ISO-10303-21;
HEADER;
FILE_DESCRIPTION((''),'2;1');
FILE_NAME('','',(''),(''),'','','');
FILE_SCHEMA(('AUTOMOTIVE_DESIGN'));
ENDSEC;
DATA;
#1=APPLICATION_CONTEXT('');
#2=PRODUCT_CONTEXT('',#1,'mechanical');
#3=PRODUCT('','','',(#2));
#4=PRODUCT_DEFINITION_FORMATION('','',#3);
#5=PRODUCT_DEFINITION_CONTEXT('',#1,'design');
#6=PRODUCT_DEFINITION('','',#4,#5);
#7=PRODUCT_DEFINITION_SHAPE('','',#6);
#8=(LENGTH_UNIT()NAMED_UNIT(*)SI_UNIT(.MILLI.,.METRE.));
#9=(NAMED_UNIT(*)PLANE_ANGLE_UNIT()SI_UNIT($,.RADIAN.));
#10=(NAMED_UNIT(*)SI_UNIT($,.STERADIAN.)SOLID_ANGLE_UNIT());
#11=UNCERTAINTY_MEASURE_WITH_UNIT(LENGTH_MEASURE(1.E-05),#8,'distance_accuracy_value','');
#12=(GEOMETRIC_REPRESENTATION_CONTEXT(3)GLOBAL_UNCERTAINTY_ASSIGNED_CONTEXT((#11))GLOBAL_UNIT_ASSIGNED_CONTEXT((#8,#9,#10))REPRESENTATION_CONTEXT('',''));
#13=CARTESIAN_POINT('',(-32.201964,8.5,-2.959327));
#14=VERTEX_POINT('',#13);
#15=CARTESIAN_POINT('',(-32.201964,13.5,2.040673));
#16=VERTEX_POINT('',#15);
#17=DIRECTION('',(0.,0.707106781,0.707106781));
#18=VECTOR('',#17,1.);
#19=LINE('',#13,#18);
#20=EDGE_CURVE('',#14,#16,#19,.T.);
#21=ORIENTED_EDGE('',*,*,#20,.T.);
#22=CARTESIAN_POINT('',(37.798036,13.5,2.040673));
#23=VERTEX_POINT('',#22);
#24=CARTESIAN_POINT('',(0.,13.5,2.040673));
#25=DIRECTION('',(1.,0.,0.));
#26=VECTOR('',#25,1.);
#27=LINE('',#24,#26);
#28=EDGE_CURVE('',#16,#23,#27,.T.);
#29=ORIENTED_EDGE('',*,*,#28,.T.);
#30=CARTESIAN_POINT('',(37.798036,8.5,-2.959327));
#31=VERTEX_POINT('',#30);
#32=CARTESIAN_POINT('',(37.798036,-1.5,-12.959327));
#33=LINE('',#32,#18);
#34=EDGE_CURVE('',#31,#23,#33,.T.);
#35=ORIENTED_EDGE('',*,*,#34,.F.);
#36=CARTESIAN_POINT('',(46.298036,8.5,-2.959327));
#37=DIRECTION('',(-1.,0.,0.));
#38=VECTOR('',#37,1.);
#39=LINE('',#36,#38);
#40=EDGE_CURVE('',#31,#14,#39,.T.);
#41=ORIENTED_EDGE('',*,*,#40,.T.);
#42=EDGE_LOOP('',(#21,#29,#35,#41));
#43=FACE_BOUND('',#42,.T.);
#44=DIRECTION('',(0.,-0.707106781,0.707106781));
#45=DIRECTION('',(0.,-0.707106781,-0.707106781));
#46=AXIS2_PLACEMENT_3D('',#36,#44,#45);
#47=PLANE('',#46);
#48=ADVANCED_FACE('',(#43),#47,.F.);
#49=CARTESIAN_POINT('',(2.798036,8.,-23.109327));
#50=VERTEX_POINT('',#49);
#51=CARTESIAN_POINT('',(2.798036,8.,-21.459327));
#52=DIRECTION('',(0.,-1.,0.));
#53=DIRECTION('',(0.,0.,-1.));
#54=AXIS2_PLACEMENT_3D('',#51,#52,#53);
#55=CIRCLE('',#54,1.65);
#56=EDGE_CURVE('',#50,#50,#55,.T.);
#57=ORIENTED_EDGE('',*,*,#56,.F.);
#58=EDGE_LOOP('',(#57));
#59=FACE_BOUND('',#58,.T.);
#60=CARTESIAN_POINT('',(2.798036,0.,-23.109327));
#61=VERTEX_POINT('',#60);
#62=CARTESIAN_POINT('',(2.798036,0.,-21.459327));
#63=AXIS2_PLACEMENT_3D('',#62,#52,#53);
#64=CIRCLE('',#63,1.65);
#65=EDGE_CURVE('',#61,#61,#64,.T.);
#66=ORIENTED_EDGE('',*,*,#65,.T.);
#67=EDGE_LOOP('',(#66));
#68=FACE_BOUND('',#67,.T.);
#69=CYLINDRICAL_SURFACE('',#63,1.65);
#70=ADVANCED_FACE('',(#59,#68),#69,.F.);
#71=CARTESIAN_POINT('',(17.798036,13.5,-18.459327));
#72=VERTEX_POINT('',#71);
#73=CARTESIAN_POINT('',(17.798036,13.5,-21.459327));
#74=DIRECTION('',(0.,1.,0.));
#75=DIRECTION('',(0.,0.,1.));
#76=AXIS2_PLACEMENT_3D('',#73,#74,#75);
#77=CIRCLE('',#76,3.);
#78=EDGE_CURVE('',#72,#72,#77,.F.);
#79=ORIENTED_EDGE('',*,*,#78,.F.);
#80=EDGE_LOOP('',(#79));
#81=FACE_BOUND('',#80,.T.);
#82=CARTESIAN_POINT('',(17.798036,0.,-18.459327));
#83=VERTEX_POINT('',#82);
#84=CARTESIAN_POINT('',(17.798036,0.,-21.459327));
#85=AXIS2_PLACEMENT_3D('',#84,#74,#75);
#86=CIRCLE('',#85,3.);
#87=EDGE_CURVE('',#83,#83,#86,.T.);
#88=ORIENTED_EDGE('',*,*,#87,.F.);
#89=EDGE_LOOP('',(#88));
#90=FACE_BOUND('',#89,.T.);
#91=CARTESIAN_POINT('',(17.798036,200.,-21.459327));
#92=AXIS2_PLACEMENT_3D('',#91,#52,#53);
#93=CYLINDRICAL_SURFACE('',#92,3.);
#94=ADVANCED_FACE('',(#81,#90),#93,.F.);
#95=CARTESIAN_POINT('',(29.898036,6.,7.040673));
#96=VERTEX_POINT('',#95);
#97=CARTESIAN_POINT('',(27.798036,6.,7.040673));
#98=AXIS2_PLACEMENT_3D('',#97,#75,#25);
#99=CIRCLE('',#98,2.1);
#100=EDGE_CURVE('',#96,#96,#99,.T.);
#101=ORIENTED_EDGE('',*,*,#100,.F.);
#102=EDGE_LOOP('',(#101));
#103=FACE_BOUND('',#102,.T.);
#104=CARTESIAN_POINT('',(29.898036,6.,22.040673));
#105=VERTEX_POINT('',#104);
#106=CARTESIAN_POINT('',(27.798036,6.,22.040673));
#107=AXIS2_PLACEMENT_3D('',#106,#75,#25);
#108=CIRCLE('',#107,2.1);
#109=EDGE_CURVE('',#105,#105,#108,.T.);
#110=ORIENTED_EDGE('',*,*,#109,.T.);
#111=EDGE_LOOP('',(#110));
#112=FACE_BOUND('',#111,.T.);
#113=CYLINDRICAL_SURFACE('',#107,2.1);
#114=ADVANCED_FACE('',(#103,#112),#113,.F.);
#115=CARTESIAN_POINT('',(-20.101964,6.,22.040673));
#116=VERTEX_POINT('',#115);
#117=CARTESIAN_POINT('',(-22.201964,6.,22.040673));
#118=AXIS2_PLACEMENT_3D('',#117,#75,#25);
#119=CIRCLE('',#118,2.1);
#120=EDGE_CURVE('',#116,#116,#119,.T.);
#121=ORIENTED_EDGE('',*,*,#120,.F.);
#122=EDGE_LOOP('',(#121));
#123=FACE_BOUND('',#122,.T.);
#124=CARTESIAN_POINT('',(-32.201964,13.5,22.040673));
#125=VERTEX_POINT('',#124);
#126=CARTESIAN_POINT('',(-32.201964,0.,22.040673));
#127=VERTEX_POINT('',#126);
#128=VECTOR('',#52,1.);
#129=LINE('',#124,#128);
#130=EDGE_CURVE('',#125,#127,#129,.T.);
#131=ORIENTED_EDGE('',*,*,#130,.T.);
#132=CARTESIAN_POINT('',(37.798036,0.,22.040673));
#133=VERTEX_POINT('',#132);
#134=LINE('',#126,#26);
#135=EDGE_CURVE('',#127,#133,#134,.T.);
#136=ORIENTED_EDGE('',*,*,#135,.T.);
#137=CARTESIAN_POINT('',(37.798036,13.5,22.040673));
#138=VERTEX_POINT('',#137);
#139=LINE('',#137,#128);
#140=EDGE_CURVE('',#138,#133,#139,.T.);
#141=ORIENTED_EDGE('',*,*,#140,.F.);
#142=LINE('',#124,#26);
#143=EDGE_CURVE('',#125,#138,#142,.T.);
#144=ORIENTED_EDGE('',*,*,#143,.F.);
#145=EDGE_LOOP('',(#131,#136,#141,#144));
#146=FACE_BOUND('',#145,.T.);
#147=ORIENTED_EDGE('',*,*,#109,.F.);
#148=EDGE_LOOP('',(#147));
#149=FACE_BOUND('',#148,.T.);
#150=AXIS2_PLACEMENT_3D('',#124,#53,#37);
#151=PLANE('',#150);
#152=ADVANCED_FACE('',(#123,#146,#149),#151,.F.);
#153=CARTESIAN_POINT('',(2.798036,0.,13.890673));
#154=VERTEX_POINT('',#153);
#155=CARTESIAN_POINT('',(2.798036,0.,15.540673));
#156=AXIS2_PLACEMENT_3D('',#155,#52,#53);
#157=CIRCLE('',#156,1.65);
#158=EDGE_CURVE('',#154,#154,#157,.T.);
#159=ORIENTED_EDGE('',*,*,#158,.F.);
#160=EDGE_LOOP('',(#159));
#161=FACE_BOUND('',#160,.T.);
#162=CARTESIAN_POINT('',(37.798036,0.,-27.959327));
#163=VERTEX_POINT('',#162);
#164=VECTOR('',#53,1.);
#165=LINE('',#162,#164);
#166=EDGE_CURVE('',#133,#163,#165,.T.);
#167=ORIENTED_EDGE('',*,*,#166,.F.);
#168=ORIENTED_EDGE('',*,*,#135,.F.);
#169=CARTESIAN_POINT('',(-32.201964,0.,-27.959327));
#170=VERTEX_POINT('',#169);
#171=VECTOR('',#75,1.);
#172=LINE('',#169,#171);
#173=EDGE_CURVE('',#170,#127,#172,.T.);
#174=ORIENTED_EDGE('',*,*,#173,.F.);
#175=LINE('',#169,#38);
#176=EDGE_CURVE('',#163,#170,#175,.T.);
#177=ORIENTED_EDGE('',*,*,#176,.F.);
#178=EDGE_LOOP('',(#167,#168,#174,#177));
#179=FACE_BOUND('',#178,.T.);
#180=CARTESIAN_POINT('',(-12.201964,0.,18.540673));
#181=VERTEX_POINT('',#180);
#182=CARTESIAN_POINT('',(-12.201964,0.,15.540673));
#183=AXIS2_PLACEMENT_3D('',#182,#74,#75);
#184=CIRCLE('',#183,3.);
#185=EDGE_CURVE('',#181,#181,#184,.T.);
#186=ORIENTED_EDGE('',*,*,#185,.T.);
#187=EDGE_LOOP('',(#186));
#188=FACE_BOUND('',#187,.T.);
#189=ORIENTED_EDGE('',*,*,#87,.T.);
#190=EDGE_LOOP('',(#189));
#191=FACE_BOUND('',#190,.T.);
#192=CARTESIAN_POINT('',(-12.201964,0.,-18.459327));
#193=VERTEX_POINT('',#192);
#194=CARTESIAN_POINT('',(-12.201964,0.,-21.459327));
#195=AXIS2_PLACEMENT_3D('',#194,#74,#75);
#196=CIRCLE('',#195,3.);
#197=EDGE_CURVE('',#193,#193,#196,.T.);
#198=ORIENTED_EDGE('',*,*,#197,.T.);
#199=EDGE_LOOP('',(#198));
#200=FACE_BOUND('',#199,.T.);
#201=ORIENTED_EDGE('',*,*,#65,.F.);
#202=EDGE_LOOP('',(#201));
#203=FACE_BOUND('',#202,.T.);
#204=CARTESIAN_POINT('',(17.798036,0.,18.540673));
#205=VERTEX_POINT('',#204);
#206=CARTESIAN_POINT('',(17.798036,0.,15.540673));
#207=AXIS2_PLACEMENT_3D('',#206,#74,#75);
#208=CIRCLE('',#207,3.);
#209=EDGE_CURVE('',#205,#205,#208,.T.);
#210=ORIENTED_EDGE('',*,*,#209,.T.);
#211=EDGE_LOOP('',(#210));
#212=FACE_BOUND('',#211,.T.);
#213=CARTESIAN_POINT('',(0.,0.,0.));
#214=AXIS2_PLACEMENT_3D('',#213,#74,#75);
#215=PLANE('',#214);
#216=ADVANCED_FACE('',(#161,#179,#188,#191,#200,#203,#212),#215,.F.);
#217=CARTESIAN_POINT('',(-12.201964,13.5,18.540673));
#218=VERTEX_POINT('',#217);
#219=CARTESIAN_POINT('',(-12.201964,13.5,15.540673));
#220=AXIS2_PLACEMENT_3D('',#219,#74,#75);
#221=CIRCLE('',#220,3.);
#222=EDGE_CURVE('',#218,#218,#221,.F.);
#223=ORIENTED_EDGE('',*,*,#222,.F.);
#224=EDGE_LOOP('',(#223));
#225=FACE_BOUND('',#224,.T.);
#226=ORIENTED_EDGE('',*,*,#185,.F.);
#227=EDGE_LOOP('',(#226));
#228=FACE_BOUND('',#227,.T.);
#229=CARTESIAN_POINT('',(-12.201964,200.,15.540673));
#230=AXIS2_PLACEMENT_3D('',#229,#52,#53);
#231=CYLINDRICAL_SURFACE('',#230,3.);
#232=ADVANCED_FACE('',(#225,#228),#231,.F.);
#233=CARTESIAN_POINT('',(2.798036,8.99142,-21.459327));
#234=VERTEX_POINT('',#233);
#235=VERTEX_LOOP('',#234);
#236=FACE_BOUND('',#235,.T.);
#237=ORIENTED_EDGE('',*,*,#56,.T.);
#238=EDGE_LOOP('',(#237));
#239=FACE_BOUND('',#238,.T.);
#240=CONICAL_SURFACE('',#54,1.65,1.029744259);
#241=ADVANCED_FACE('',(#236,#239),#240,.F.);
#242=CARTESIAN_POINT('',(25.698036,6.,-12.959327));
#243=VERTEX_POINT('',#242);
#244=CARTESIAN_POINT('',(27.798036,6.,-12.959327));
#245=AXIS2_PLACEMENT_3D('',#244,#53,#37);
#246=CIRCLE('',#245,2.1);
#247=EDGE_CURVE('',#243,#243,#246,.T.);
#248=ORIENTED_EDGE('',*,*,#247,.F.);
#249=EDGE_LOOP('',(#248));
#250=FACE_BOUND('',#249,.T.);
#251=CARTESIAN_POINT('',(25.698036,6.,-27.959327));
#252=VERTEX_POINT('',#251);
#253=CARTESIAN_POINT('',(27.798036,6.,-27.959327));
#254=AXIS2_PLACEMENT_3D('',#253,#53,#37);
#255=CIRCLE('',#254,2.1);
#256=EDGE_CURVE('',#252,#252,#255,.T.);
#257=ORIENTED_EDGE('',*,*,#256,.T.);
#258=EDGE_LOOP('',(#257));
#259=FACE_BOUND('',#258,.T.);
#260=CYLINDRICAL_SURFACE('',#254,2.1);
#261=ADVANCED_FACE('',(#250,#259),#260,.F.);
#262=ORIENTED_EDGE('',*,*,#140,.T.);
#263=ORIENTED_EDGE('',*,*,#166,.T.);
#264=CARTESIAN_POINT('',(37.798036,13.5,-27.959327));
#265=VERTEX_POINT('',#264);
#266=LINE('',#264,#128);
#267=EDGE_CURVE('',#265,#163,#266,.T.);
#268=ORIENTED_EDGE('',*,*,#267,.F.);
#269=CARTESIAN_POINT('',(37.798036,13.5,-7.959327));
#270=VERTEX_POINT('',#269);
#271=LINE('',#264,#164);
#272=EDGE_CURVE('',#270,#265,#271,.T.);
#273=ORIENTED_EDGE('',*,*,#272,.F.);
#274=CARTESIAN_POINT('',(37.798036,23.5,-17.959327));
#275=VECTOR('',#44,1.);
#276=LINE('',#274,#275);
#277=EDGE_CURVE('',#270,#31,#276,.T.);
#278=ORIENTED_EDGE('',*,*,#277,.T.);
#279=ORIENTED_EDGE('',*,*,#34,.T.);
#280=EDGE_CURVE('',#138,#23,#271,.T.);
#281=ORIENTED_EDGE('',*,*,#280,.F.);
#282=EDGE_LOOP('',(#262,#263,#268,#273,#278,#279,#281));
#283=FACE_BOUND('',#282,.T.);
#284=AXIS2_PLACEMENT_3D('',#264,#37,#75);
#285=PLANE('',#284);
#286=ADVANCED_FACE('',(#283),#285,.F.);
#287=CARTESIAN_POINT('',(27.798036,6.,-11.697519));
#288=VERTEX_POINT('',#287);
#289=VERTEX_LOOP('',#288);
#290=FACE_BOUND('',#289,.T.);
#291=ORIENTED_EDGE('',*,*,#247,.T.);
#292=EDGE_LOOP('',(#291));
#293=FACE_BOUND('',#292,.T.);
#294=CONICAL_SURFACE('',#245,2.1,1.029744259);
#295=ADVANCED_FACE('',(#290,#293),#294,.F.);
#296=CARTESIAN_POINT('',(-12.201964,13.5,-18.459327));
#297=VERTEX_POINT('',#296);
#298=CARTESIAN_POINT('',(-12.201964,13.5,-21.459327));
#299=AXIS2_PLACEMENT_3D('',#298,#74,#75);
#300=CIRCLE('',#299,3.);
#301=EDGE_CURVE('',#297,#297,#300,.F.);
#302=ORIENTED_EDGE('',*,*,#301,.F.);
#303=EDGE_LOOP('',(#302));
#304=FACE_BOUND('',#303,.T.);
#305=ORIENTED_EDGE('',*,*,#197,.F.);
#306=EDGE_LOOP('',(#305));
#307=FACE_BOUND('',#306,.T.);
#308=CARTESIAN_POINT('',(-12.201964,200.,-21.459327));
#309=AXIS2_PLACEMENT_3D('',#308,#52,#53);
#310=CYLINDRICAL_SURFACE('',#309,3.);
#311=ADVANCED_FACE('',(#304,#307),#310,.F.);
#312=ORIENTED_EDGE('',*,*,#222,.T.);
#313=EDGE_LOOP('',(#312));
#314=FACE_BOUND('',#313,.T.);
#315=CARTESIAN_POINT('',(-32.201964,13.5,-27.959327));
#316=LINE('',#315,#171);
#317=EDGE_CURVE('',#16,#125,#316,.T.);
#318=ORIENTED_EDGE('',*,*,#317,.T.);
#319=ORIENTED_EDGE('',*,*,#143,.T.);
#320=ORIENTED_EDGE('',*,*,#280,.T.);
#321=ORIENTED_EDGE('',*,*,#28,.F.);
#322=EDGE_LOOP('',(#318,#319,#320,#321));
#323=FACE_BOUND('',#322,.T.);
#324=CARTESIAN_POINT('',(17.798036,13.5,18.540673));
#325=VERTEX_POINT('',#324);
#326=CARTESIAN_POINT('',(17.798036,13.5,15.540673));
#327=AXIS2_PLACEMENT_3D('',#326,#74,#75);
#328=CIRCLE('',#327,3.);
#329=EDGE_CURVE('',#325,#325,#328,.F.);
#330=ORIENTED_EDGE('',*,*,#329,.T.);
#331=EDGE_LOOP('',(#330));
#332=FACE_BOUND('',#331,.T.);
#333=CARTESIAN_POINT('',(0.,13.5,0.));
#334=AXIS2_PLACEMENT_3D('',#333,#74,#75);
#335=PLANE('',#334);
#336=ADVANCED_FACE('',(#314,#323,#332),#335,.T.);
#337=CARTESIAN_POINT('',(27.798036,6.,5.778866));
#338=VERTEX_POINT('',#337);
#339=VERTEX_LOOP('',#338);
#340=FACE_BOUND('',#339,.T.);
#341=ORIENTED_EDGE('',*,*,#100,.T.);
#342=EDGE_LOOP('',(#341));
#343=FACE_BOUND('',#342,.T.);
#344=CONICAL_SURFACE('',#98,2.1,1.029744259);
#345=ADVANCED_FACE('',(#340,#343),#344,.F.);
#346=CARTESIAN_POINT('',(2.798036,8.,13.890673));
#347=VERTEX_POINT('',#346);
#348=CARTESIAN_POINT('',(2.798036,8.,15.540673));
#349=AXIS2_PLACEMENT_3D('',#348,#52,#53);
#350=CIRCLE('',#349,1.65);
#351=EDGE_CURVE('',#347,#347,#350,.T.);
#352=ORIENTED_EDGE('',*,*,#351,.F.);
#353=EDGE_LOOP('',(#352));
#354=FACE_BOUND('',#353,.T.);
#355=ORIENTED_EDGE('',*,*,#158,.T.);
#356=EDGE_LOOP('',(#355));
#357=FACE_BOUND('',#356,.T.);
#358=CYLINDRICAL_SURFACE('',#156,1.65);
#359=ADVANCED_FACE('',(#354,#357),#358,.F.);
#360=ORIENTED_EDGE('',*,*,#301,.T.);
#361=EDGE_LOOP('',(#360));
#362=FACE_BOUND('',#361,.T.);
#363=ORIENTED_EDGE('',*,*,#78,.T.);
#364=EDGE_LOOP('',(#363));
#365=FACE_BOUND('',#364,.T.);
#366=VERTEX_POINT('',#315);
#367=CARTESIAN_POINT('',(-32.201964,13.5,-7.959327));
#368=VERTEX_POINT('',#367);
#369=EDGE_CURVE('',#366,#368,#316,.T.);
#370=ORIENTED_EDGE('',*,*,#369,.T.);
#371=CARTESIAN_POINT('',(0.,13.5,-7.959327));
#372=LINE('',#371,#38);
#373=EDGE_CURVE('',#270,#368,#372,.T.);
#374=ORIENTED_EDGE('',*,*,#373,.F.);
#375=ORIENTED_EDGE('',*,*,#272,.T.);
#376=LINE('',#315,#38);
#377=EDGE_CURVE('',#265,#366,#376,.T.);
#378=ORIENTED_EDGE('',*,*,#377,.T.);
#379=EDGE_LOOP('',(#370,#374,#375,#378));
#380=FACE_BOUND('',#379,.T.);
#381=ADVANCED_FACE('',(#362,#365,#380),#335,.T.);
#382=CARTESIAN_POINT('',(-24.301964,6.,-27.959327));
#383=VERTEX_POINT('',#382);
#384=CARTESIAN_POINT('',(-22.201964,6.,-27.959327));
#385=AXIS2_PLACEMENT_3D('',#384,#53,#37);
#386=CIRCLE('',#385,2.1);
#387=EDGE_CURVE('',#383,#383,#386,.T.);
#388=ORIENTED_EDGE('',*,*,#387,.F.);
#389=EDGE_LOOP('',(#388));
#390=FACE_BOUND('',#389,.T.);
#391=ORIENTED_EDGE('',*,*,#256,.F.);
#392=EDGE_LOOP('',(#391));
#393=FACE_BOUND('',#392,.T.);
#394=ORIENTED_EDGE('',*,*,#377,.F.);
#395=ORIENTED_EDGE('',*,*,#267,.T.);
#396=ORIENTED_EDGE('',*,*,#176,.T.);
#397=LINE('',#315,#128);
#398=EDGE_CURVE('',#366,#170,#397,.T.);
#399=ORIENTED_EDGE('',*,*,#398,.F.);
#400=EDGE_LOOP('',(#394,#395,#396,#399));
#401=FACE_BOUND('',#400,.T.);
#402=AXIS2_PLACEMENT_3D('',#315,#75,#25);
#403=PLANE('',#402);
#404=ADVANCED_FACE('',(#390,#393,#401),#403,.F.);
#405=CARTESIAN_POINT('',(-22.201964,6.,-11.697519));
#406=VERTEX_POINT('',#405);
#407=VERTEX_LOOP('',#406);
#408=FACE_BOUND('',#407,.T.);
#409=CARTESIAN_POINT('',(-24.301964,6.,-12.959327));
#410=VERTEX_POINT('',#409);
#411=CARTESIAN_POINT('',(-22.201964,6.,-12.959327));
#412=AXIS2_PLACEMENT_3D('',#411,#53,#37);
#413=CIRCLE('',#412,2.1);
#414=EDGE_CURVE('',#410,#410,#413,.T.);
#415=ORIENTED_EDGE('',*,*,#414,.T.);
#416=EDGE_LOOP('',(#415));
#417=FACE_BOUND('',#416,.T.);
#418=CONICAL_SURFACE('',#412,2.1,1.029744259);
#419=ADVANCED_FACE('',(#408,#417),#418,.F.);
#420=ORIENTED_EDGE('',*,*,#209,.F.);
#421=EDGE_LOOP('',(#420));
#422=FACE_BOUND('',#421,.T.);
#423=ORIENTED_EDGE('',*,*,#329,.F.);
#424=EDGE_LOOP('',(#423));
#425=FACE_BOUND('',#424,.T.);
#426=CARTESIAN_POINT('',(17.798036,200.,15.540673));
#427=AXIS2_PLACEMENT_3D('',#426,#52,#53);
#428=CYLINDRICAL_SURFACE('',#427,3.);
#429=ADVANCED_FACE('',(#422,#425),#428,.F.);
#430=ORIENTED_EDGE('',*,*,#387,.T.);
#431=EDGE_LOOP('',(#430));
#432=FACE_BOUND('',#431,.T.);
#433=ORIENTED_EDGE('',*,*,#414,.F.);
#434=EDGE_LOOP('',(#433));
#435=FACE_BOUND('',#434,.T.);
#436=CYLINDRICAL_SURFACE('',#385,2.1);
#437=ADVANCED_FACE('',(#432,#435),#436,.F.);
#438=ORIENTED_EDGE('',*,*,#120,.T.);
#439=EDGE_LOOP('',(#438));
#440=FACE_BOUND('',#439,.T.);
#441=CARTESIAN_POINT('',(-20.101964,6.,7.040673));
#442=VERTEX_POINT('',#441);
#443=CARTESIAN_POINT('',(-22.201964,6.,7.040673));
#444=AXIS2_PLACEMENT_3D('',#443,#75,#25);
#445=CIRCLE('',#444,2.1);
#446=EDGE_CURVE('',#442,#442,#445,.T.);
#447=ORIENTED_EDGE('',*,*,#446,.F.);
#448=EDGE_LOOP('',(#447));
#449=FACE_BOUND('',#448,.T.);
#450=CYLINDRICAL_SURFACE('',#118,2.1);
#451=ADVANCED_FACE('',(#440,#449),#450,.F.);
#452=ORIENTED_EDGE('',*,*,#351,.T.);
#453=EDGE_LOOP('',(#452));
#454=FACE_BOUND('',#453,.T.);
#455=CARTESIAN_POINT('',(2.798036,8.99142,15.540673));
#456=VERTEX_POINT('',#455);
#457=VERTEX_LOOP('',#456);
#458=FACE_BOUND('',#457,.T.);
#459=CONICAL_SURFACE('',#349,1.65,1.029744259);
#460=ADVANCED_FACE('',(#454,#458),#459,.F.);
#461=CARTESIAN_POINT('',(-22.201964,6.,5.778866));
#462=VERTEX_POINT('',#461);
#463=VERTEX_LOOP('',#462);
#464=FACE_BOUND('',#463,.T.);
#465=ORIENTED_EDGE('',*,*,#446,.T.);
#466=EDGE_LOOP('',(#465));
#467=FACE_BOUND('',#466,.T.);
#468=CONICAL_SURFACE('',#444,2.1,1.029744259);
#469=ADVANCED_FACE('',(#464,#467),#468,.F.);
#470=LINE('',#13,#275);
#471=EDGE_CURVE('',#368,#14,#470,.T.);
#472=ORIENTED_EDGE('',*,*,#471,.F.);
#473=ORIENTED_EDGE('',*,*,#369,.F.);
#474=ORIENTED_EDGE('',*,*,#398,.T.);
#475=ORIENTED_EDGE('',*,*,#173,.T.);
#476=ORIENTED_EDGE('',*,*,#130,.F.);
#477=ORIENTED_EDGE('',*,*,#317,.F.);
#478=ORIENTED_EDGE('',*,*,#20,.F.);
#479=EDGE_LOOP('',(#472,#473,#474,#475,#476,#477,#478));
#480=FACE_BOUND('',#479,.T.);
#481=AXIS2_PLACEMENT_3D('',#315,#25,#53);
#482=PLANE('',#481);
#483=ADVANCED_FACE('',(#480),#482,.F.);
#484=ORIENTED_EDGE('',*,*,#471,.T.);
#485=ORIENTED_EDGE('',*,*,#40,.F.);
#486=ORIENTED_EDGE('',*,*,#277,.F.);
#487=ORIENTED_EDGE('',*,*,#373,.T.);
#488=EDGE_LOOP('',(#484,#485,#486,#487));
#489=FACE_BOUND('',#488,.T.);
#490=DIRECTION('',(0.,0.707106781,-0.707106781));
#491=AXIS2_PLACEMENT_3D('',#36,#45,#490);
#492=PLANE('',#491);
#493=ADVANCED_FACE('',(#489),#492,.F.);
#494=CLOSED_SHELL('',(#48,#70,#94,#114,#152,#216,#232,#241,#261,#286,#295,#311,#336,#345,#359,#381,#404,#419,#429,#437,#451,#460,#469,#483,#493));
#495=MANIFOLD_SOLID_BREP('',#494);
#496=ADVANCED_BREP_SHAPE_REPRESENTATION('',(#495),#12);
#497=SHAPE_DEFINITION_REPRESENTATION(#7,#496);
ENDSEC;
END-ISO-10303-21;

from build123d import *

# Parameters (mm, degrees)
SKETCH1_W             = 70
SKETCH1_H             = 50
BOSS_EXTRUDE1_DEPTH   = 13.5
CUT_EXTRUDE1_DEPTH    = 78.5
SKETCH6_R             = 3
CUT_EXTRUDE2_DEPTH    = 200
M4_TAPPED_HOLE1_D     = 3.3
M4_TAPPED_HOLE1_DEPTH = 8
M4_TAPPED_HOLE1_TIP   = 0.991420021
M5_TAPPED_HOLE1_D     = 4.2
M5_TAPPED_HOLE1_DEPTH = 15
M5_TAPPED_HOLE1_TIP   = 1.2618073


# Read off the part's stored shape, not the designer's step: M5 Tapped Hole2
with BuildPart() as part:
    # Sketch1 → Boss-Extrude1 (new body)
    with BuildSketch(Plane(origin=(0, 0, 0), x_dir=(1, 0, 0), z_dir=(0, 1, 0))):
        with Locations((2.798036466, 2.959326788)):
            Rectangle(SKETCH1_W, SKETCH1_H)
    extrude(amount=BOSS_EXTRUDE1_DEPTH)

    # Sketch3 → Cut-Extrude1 (cut)
    with BuildSketch(Plane.ZY.offset(32.201963534)):
        Polygon((-2.959326788, 8.5), (-7.959326788, 13.5), (2.040673212, 13.5), align=None)
    extrude(amount=-CUT_EXTRUDE1_DEPTH, mode=Mode.SUBTRACT)

    # Sketch6 → Cut-Extrude2 (cut)
    with BuildSketch(Plane(origin=(0, 0, 0), x_dir=(1, 0, 0), z_dir=(0, 1, 0))):
        with Locations(Location((-12.201963534, -15.540673212, 0), (0, 0, 270))):
            Circle(SKETCH6_R)
        with Locations(Location((17.798036466, -15.540673212, 0), (0, 0, 270))):
            Circle(SKETCH6_R)
        with Locations(Location((-12.201963534, 21.459326788, 0), (0, 0, 270))):
            Circle(SKETCH6_R)
        with Locations(Location((17.798036466, 21.459326788, 0), (0, 0, 270))):
            Circle(SKETCH6_R)
    extrude(amount=CUT_EXTRUDE2_DEPTH, mode=Mode.SUBTRACT)

    # M4 Tapped Hole1
    with Locations(Plane(origin=(0, 0, 0), x_dir=(-1, 0, 0), z_dir=(0, -1, 0))):
        with Locations((-2.798036466, -15.540673212), (-2.798036466, 21.459326788)):
            Hole(M4_TAPPED_HOLE1_D / 2, depth=M4_TAPPED_HOLE1_DEPTH)
            with Locations((0, 0, -(M4_TAPPED_HOLE1_DEPTH + M4_TAPPED_HOLE1_TIP / 2))):  # 118° drill point
                Cone(0, M4_TAPPED_HOLE1_D / 2, M4_TAPPED_HOLE1_TIP, mode=Mode.SUBTRACT)

    # M5 Tapped Hole1
    with Locations(Plane(origin=(0, 0, -27.959326788), x_dir=(-1, 0, 0), z_dir=(0, 0, -1))):
        with Locations((-27.798036466, 6), (22.201963534, 6)):
            Hole(M5_TAPPED_HOLE1_D / 2, depth=M5_TAPPED_HOLE1_DEPTH)
            with Locations((0, 0, -(M5_TAPPED_HOLE1_DEPTH + M5_TAPPED_HOLE1_TIP / 2))):  # 118° drill point
                Cone(0, M5_TAPPED_HOLE1_D / 2, M5_TAPPED_HOLE1_TIP, mode=Mode.SUBTRACT)

    # M5 Tapped Hole2 outline → M5 Tapped Hole2 (revolve, cut)
    with BuildSketch(Plane(origin=(-22.201963534, 6, 0), x_dir=(1, 0, 0), z_dir=(0, -1, 0))):
        Polygon((0, 5.778865912), (2.1, 7.040673212), (2.1, 22.040673212), (0, 22.040673212), align=None)
    revolve(axis=Axis((-22.201963534, 6, 0), (0, 0, 1)), mode=Mode.SUBTRACT)

    # M5 Tapped Hole2 2 outline → M5 Tapped Hole2 2 (revolve, cut)
    with BuildSketch(Plane(origin=(27.798036466, 6, 0), x_dir=(1, 0, 0), z_dir=(0, -1, 0))):
        Polygon((0, 5.778865912), (2.1, 7.040673212), (2.1, 22.040673212), (0, 22.040673212), align=None)
    revolve(axis=Axis((27.798036466, 6, 0), (0, 0, 1)), mode=Mode.SUBTRACT)


solid = part.part
